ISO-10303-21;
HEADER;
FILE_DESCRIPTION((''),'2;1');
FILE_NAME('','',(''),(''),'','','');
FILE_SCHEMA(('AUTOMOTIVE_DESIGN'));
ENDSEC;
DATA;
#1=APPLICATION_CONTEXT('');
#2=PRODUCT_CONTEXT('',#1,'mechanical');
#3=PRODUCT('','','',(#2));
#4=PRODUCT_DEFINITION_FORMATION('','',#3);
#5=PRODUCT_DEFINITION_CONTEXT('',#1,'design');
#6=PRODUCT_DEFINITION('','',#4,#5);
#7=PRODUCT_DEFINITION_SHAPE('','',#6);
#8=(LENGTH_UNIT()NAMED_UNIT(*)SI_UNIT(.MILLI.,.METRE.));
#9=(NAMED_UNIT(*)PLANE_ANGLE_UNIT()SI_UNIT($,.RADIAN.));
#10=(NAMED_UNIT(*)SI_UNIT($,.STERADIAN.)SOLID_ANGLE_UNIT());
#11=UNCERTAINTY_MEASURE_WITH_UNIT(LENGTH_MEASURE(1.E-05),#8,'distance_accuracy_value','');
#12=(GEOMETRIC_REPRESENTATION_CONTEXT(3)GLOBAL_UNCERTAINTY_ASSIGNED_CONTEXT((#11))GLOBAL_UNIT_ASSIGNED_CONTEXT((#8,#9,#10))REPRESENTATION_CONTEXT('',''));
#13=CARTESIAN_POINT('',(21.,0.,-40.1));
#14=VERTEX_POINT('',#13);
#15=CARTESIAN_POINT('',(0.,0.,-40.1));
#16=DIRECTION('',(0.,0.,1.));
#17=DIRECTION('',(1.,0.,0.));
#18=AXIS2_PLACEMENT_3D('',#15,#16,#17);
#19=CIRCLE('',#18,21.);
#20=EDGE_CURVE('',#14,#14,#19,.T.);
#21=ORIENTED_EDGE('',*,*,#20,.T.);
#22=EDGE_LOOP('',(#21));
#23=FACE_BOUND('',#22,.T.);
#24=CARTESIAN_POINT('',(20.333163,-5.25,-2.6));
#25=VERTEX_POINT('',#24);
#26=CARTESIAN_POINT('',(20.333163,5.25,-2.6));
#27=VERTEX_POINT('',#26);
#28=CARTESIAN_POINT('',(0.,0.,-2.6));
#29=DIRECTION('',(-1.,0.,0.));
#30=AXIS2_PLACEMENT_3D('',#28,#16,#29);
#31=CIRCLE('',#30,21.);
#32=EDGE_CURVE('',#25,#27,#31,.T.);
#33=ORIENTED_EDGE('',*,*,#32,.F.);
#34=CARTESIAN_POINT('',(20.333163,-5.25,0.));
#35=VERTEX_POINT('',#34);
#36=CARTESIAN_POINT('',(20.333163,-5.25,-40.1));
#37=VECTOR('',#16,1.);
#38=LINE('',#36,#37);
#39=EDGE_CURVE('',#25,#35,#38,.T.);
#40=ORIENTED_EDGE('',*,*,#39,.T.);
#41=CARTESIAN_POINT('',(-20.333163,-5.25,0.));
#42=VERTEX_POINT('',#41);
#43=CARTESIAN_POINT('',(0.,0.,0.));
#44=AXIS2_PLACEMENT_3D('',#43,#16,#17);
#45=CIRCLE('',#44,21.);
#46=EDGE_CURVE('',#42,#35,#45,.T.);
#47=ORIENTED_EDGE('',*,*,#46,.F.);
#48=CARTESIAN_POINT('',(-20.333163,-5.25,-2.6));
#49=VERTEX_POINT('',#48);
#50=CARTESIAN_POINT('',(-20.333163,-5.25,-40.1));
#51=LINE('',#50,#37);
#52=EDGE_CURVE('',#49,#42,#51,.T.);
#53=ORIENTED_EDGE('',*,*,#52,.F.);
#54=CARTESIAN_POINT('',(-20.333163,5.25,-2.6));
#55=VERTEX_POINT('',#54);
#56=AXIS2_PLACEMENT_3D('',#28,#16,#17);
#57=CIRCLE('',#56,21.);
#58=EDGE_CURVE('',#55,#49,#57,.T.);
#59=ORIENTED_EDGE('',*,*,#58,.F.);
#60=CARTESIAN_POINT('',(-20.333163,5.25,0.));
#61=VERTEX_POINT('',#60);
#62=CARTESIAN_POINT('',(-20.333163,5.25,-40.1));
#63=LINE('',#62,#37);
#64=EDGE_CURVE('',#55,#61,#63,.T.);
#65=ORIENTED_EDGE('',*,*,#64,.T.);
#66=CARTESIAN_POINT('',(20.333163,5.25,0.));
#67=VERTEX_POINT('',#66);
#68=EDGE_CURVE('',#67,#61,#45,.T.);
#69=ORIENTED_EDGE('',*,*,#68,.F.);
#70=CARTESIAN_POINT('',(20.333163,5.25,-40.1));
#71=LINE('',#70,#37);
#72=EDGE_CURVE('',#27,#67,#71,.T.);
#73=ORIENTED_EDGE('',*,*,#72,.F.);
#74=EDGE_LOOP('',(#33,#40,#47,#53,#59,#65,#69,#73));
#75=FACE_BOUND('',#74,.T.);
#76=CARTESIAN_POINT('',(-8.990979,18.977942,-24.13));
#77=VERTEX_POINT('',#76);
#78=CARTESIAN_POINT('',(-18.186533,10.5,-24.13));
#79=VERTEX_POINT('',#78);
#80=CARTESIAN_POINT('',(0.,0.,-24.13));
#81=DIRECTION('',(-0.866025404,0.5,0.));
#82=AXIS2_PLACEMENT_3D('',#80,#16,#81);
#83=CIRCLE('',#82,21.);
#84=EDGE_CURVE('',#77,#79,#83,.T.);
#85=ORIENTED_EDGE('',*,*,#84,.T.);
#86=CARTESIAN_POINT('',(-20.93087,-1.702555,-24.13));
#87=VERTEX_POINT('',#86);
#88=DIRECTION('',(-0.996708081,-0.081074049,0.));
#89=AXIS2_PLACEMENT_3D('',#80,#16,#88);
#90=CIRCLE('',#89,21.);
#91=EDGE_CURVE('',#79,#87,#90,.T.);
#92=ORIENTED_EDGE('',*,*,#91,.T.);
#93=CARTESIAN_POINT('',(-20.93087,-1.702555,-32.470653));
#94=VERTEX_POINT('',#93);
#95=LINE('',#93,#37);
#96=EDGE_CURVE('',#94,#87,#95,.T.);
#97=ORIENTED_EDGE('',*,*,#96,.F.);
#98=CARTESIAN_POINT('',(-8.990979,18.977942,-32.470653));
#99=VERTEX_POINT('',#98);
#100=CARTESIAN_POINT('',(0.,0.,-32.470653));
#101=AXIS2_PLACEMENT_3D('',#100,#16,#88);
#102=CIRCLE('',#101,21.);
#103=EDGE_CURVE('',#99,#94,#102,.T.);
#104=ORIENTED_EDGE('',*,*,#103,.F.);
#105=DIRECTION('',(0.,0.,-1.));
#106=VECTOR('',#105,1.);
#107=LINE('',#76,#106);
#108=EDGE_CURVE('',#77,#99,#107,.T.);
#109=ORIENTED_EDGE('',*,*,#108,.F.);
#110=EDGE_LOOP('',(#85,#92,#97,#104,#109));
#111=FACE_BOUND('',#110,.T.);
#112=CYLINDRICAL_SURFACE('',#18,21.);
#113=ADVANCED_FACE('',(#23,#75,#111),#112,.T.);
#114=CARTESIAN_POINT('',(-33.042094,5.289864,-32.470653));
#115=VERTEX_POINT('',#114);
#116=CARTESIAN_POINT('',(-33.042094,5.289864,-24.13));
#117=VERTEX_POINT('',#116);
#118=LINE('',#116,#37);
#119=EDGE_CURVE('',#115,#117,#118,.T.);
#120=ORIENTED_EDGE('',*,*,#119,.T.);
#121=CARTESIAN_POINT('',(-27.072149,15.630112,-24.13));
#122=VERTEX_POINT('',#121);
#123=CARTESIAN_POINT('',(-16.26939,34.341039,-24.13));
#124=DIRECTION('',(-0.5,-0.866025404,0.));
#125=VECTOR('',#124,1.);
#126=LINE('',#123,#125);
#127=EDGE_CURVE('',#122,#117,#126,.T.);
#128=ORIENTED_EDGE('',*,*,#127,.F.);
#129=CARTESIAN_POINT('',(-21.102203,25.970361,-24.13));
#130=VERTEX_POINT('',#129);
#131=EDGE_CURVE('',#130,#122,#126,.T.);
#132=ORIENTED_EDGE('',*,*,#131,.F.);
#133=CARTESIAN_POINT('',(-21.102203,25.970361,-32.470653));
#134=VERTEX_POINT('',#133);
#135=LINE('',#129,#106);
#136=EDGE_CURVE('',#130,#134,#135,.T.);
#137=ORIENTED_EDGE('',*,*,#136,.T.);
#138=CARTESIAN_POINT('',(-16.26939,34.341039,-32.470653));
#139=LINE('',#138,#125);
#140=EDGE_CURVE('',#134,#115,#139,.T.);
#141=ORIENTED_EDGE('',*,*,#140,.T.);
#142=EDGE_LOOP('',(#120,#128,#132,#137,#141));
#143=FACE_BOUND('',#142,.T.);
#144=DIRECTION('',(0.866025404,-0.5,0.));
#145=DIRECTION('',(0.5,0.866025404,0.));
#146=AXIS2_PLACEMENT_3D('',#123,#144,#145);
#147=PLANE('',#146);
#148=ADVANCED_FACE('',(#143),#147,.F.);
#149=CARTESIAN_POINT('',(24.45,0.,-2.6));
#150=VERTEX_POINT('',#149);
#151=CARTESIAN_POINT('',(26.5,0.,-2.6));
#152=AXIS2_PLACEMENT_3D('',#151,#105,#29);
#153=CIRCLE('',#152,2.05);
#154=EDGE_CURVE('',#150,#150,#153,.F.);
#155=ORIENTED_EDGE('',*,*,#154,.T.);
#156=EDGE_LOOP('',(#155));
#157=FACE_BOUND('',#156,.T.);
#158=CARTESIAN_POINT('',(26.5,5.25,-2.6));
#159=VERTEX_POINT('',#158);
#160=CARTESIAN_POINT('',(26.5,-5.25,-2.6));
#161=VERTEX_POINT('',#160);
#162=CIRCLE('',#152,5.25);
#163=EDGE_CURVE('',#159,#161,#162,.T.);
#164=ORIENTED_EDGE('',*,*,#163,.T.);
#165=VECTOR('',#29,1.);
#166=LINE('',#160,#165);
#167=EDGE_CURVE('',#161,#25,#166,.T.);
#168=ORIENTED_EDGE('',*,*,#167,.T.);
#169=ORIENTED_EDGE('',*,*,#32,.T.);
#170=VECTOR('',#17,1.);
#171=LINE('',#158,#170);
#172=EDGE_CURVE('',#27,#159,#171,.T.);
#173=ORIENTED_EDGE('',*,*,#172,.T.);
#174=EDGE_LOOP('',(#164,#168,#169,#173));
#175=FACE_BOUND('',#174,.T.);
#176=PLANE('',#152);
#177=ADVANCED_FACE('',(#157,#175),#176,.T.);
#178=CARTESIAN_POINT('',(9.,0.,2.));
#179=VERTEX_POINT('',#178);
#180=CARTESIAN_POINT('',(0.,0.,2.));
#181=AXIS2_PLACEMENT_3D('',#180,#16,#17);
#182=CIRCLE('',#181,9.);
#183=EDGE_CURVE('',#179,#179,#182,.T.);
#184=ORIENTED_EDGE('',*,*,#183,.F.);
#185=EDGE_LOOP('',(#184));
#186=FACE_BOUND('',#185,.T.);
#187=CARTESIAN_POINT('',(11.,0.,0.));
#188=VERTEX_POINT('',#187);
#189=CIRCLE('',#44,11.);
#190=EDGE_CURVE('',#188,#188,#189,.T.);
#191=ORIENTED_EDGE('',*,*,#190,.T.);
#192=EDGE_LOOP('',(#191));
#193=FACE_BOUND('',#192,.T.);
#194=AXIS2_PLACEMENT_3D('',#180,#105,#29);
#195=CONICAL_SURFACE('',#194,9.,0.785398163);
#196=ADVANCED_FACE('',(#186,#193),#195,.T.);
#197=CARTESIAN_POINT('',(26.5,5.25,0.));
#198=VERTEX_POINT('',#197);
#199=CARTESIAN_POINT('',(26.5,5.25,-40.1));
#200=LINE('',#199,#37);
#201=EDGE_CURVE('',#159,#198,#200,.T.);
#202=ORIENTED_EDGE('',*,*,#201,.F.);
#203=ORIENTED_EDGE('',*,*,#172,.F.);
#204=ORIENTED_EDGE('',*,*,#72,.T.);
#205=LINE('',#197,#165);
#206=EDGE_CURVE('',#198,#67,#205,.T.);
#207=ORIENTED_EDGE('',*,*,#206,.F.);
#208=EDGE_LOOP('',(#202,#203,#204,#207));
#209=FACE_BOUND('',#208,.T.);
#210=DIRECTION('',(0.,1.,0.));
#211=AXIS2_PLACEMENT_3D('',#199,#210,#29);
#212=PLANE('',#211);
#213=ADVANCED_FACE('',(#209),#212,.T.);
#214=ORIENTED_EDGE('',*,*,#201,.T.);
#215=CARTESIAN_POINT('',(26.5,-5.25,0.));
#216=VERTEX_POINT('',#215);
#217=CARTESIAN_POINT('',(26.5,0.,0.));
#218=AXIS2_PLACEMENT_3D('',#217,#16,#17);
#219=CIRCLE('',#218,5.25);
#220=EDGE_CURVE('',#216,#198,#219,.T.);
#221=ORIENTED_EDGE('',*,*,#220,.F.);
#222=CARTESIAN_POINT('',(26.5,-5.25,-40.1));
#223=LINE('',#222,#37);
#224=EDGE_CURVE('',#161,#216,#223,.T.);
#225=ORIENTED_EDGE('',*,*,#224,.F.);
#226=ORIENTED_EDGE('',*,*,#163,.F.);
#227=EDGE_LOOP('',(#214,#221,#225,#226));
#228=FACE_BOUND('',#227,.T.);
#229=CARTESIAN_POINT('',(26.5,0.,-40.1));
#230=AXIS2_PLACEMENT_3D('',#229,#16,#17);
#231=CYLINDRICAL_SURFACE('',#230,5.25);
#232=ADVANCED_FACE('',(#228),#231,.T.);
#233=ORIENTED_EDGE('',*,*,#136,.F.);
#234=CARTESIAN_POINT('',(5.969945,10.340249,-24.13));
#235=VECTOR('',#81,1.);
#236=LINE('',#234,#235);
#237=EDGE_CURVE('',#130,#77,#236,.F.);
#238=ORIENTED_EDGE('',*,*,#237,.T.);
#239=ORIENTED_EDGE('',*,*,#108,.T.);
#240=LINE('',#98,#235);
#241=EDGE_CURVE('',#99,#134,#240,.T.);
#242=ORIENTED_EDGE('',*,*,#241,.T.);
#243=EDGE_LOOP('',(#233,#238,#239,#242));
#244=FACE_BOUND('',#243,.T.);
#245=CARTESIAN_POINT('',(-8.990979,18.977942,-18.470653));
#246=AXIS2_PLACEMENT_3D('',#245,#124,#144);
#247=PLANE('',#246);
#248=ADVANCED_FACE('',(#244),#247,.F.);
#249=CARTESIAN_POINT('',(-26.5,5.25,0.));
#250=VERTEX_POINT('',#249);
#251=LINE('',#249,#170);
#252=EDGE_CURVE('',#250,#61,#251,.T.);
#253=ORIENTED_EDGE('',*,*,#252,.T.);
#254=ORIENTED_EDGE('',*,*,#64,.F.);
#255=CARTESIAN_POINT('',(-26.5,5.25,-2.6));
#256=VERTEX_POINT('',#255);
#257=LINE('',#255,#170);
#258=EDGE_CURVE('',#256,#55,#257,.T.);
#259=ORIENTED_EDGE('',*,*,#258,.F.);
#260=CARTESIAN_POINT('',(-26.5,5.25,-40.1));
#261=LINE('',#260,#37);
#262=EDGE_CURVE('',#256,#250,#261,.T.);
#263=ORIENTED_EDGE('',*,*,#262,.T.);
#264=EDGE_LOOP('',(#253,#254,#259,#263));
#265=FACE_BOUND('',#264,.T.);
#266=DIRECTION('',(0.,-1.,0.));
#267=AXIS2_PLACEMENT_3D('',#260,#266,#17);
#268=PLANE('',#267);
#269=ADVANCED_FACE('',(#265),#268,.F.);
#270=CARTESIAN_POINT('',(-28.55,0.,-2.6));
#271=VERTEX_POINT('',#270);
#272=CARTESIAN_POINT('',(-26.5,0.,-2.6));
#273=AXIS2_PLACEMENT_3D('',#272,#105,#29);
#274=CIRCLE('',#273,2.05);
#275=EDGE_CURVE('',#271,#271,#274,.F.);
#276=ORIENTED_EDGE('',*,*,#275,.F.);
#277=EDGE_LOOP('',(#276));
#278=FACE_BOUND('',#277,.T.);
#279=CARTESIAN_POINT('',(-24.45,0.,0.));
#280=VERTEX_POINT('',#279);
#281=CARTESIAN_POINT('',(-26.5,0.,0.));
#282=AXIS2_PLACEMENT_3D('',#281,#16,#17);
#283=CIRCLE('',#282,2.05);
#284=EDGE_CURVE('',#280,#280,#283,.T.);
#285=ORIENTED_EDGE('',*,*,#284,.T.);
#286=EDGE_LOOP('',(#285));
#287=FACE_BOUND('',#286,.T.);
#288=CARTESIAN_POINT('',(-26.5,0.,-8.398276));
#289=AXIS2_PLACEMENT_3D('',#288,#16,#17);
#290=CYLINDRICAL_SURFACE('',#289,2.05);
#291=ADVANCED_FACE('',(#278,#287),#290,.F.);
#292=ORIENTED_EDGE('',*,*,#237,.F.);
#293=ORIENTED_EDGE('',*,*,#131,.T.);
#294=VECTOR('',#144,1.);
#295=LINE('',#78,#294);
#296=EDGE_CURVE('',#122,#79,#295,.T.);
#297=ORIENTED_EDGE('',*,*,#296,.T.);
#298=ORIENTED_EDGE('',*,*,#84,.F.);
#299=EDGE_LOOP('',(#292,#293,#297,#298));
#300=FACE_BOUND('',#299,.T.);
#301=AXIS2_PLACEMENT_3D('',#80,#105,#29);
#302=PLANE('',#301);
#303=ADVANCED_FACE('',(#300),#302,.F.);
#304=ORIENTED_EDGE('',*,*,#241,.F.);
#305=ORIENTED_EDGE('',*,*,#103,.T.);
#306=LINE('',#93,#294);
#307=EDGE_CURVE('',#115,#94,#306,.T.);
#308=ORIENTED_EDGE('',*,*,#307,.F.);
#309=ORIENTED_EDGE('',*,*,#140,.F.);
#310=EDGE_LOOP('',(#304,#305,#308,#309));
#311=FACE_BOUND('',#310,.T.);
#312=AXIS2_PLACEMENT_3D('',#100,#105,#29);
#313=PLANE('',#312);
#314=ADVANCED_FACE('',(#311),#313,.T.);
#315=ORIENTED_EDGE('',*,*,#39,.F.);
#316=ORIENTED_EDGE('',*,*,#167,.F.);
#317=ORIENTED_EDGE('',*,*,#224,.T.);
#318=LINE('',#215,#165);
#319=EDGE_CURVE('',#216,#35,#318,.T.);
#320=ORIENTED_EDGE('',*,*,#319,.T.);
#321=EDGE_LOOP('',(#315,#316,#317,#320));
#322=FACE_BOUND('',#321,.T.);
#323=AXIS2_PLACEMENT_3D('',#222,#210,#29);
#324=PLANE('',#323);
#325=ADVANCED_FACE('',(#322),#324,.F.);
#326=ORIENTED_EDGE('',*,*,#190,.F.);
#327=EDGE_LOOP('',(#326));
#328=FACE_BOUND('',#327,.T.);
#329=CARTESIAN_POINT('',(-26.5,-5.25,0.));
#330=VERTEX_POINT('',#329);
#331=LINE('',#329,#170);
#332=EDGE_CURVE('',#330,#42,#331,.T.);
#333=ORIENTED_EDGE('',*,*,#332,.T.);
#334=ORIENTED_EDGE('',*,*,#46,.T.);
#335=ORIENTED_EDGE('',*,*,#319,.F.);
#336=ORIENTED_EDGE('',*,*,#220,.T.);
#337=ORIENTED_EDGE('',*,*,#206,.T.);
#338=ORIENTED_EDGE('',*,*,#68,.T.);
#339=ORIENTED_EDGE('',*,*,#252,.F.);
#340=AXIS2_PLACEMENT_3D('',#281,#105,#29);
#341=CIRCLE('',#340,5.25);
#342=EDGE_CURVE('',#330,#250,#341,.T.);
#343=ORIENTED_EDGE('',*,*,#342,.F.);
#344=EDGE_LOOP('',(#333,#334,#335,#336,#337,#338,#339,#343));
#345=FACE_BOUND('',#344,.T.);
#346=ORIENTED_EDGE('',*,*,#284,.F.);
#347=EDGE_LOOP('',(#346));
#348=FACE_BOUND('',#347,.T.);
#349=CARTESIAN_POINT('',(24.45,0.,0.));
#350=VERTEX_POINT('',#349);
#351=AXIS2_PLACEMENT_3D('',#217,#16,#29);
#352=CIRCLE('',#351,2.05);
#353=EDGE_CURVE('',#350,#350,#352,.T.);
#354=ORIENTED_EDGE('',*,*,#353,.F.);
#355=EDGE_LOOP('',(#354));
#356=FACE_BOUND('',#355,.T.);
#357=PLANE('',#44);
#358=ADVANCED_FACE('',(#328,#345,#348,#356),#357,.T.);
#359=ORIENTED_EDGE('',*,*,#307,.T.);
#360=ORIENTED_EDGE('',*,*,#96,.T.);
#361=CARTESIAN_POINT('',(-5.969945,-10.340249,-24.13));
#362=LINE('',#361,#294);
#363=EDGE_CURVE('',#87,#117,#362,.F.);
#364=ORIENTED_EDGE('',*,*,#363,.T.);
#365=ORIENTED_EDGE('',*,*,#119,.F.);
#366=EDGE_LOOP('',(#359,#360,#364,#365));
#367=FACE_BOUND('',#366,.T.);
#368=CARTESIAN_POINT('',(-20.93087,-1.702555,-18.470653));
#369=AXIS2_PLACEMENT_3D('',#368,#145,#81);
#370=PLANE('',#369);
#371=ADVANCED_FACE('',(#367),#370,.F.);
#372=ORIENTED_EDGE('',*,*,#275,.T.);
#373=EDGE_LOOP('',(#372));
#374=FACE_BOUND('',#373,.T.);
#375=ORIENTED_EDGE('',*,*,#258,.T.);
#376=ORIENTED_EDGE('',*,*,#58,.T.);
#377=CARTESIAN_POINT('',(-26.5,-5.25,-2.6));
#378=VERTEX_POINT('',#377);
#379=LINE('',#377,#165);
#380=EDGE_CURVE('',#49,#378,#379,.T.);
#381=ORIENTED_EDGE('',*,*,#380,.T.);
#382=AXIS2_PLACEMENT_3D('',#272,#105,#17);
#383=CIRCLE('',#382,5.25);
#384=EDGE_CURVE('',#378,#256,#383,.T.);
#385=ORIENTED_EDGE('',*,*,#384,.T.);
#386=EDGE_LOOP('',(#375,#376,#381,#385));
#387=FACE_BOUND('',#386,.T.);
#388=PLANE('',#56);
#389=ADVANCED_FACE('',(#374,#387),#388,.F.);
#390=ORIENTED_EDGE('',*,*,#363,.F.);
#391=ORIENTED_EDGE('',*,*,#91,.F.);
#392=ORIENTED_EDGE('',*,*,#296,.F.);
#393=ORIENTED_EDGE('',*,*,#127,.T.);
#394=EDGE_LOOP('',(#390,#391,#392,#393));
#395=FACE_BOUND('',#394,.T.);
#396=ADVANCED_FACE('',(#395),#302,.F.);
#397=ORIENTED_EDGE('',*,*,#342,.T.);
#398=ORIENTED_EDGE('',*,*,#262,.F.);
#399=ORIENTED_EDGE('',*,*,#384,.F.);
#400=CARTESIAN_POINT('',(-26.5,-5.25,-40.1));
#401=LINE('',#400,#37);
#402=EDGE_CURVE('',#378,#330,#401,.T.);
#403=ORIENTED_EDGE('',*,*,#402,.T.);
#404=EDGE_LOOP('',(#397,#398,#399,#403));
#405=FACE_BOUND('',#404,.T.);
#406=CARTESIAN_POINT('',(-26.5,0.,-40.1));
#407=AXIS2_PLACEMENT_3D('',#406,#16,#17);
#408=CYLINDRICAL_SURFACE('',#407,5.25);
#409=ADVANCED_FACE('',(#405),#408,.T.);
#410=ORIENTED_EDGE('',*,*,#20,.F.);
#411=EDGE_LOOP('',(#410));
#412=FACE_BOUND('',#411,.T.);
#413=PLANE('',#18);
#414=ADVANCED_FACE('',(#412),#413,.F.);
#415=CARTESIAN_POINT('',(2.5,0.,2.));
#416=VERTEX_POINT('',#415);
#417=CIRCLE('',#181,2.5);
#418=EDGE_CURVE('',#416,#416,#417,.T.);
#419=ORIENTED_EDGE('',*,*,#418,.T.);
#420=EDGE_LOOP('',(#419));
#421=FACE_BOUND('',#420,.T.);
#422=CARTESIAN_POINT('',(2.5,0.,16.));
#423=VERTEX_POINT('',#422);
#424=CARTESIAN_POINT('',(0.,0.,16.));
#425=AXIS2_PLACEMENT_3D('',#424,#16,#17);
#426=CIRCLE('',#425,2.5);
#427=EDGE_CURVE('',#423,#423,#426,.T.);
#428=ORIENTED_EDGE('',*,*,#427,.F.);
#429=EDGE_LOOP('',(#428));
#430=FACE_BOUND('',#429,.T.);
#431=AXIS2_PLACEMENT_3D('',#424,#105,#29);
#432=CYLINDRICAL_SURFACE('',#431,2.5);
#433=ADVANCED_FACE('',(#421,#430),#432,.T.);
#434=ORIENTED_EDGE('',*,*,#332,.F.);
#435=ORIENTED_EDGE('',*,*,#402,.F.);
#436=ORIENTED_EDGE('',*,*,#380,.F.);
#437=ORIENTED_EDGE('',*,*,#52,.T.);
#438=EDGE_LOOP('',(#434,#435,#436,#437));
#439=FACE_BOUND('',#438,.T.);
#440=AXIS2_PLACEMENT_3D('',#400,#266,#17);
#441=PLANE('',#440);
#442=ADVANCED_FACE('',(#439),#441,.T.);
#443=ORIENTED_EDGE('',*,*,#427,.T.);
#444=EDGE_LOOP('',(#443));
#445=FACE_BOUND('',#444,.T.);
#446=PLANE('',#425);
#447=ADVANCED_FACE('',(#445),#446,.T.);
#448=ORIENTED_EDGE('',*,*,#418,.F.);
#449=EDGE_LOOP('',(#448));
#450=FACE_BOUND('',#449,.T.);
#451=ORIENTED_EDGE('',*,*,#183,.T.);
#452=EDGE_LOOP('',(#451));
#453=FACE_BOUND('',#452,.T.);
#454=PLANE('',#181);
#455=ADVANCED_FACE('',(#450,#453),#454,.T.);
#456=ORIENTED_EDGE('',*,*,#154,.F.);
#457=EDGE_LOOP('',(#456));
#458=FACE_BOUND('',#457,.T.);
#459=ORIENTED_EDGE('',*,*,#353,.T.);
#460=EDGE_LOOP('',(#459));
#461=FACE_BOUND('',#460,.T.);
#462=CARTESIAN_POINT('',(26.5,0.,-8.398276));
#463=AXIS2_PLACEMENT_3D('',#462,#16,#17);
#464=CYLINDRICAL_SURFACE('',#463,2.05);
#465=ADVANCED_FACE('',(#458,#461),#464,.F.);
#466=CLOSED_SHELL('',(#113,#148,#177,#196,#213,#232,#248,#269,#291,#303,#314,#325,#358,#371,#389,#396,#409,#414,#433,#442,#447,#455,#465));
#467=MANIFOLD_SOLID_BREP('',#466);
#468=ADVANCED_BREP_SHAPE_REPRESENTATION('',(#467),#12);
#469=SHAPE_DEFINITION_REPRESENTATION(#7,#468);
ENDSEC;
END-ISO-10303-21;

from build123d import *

# Parameters (mm, degrees)
BOSS_EXTRUDE1_DEPTH = 40.1
SKETCH3_R           = 9
SKETCH2_R           = 11
CUT_EXTRUDE1_START  = -37.5
CUT_EXTRUDE1_DEPTH  = 37.5
SKETCH6_R           = 2.05
CUT_EXTRUDE2_DEPTH  = 2.6
SKETCH7_R           = 2.5
BOSS_EXTRUDE2_DEPTH = 14
WRAP4_START         = -32.470653403
WRAP4_DEPTH         = 8.340653403
CUT_EXTRUDE4_DEPTH  = 8.340653
CUT_EXTRUDE5_DEPTH  = 14


# Read off the part's stored shape, not the designer's step: Wrap4
with BuildPart() as part:
    # Sketch1 → Boss-Extrude1 (new body)
    with BuildSketch(Plane.XY):
        with BuildLine():
            Line((26.5, 5.25), (20.333162568, 5.25))
            ThreePointArc((20.333162568, 5.25), (0, 21), (-20.333162568, 5.25))
            Line((-20.333162568, 5.25), (-26.5, 5.25))
            ThreePointArc((-26.5, 5.25), (-31.75, 0), (-26.5, -5.25))
            Line((-26.5, -5.25), (-20.333162568, -5.25))
            ThreePointArc((-20.333162568, -5.25), (0, -21), (20.333162568, -5.25))
            Line((20.333162568, -5.25), (26.5, -5.25))
            ThreePointArc((26.5, -5.25), (31.75, 0), (26.5, 5.25))
        make_face()
    extrude(amount=-BOSS_EXTRUDE1_DEPTH)

    # Sketch3 → Loft1 section 0
    with BuildSketch(Plane.XY.offset(2)):
        Circle(SKETCH3_R)
    # Sketch2 → Loft1 section 1
    with BuildSketch(Plane.XY):
        Circle(SKETCH2_R)
    loft()

    # Sketch4 → Cut-Extrude1 (cut)
    with BuildSketch(Plane(origin=(0, 0, -40.1), x_dir=(-1, 0, 0), z_dir=(0, 0, -1)).offset(CUT_EXTRUDE1_START)):
        with BuildLine():
            Line((-26.5, 5.25), (-20.333162568, 5.25))
            ThreePointArc((-20.333162568, 5.25), (-21, 0), (-20.333162568, -5.25))
            Line((-20.333162568, -5.25), (-26.5, -5.25))
            ThreePointArc((-26.5, -5.25), (-31.75, 0), (-26.5, 5.25))
        make_face()
        with BuildLine():
            Line((26.5, -5.25), (20.333162568, -5.25))
            ThreePointArc((20.333162568, -5.25), (21, 0), (20.333162568, 5.25))
            Line((20.333162568, 5.25), (26.5, 5.25))
            ThreePointArc((26.5, 5.25), (31.75, 0), (26.5, -5.25))
        make_face()
    extrude(amount=CUT_EXTRUDE1_DEPTH, mode=Mode.SUBTRACT)

    # Sketch6 → Cut-Extrude2 (cut)
    with BuildSketch(Plane.XY):
        with Locations((-26.5, 0)):
            Circle(SKETCH6_R)
        with Locations(Location((26.5, 0, 0), (0, 0, 180))):
            Circle(SKETCH6_R)
    extrude(amount=-CUT_EXTRUDE2_DEPTH, mode=Mode.SUBTRACT)

    # Sketch7 → Boss-Extrude2 (add)
    with BuildSketch(Plane.XY.offset(2)):
        Circle(SKETCH7_R)
    extrude(amount=BOSS_EXTRUDE2_DEPTH)

    # Wrap4 outline → Wrap4 (add)
    with BuildSketch(Plane.XY.offset(WRAP4_START)):
        with BuildLine():
            ThreePointArc((-20.9308697, -1.702555024), (-18.186533479, 10.5), (-8.990978947, 18.977942396))
            Line((-8.990978947, 18.977942396), (-16.269390476, 34.341038621))
            ThreePointArc((-16.269390476, 34.341038621), (-32.908965344, 19), (-37.874907076, -3.080813854))
            Line((-37.874907076, -3.080813854), (-20.9308697, -1.702555024))
        make_face()
    extrude(amount=WRAP4_DEPTH)

    # Sketch19 → Cut-Extrude4 (cut)
    with BuildSketch(Plane(origin=(0, 0, -32.470653403), x_dir=(-1, 0, 0), z_dir=(0, 0, -1))):
        with BuildLine():
            Line((16.269390476, 34.341038621), (37.874907076, -3.080813854))
            ThreePointArc((37.874907076, -3.080813854), (32.908965344, 19), (16.269390476, 34.341038621))
        make_face()
    extrude(amount=-CUT_EXTRUDE4_DEPTH, mode=Mode.SUBTRACT)

    # Sketch20 → Cut-Extrude5 (cut)
    with BuildSketch(Plane(origin=(0, 0, -32.470653403), x_dir=(-1, 0, 0), z_dir=(0, 0, -1))):
        Polygon((16.269390476, 34.341038621), (8.990978947, 18.977942396), (21.1022034, 25.970361093), align=None)
        Polygon((37.874907076, -3.080813854), (20.9308697, -1.702555024), (33.042094152, 5.289863673), align=None)
    extrude(amount=-CUT_EXTRUDE5_DEPTH, mode=Mode.SUBTRACT)


solid = part.part
